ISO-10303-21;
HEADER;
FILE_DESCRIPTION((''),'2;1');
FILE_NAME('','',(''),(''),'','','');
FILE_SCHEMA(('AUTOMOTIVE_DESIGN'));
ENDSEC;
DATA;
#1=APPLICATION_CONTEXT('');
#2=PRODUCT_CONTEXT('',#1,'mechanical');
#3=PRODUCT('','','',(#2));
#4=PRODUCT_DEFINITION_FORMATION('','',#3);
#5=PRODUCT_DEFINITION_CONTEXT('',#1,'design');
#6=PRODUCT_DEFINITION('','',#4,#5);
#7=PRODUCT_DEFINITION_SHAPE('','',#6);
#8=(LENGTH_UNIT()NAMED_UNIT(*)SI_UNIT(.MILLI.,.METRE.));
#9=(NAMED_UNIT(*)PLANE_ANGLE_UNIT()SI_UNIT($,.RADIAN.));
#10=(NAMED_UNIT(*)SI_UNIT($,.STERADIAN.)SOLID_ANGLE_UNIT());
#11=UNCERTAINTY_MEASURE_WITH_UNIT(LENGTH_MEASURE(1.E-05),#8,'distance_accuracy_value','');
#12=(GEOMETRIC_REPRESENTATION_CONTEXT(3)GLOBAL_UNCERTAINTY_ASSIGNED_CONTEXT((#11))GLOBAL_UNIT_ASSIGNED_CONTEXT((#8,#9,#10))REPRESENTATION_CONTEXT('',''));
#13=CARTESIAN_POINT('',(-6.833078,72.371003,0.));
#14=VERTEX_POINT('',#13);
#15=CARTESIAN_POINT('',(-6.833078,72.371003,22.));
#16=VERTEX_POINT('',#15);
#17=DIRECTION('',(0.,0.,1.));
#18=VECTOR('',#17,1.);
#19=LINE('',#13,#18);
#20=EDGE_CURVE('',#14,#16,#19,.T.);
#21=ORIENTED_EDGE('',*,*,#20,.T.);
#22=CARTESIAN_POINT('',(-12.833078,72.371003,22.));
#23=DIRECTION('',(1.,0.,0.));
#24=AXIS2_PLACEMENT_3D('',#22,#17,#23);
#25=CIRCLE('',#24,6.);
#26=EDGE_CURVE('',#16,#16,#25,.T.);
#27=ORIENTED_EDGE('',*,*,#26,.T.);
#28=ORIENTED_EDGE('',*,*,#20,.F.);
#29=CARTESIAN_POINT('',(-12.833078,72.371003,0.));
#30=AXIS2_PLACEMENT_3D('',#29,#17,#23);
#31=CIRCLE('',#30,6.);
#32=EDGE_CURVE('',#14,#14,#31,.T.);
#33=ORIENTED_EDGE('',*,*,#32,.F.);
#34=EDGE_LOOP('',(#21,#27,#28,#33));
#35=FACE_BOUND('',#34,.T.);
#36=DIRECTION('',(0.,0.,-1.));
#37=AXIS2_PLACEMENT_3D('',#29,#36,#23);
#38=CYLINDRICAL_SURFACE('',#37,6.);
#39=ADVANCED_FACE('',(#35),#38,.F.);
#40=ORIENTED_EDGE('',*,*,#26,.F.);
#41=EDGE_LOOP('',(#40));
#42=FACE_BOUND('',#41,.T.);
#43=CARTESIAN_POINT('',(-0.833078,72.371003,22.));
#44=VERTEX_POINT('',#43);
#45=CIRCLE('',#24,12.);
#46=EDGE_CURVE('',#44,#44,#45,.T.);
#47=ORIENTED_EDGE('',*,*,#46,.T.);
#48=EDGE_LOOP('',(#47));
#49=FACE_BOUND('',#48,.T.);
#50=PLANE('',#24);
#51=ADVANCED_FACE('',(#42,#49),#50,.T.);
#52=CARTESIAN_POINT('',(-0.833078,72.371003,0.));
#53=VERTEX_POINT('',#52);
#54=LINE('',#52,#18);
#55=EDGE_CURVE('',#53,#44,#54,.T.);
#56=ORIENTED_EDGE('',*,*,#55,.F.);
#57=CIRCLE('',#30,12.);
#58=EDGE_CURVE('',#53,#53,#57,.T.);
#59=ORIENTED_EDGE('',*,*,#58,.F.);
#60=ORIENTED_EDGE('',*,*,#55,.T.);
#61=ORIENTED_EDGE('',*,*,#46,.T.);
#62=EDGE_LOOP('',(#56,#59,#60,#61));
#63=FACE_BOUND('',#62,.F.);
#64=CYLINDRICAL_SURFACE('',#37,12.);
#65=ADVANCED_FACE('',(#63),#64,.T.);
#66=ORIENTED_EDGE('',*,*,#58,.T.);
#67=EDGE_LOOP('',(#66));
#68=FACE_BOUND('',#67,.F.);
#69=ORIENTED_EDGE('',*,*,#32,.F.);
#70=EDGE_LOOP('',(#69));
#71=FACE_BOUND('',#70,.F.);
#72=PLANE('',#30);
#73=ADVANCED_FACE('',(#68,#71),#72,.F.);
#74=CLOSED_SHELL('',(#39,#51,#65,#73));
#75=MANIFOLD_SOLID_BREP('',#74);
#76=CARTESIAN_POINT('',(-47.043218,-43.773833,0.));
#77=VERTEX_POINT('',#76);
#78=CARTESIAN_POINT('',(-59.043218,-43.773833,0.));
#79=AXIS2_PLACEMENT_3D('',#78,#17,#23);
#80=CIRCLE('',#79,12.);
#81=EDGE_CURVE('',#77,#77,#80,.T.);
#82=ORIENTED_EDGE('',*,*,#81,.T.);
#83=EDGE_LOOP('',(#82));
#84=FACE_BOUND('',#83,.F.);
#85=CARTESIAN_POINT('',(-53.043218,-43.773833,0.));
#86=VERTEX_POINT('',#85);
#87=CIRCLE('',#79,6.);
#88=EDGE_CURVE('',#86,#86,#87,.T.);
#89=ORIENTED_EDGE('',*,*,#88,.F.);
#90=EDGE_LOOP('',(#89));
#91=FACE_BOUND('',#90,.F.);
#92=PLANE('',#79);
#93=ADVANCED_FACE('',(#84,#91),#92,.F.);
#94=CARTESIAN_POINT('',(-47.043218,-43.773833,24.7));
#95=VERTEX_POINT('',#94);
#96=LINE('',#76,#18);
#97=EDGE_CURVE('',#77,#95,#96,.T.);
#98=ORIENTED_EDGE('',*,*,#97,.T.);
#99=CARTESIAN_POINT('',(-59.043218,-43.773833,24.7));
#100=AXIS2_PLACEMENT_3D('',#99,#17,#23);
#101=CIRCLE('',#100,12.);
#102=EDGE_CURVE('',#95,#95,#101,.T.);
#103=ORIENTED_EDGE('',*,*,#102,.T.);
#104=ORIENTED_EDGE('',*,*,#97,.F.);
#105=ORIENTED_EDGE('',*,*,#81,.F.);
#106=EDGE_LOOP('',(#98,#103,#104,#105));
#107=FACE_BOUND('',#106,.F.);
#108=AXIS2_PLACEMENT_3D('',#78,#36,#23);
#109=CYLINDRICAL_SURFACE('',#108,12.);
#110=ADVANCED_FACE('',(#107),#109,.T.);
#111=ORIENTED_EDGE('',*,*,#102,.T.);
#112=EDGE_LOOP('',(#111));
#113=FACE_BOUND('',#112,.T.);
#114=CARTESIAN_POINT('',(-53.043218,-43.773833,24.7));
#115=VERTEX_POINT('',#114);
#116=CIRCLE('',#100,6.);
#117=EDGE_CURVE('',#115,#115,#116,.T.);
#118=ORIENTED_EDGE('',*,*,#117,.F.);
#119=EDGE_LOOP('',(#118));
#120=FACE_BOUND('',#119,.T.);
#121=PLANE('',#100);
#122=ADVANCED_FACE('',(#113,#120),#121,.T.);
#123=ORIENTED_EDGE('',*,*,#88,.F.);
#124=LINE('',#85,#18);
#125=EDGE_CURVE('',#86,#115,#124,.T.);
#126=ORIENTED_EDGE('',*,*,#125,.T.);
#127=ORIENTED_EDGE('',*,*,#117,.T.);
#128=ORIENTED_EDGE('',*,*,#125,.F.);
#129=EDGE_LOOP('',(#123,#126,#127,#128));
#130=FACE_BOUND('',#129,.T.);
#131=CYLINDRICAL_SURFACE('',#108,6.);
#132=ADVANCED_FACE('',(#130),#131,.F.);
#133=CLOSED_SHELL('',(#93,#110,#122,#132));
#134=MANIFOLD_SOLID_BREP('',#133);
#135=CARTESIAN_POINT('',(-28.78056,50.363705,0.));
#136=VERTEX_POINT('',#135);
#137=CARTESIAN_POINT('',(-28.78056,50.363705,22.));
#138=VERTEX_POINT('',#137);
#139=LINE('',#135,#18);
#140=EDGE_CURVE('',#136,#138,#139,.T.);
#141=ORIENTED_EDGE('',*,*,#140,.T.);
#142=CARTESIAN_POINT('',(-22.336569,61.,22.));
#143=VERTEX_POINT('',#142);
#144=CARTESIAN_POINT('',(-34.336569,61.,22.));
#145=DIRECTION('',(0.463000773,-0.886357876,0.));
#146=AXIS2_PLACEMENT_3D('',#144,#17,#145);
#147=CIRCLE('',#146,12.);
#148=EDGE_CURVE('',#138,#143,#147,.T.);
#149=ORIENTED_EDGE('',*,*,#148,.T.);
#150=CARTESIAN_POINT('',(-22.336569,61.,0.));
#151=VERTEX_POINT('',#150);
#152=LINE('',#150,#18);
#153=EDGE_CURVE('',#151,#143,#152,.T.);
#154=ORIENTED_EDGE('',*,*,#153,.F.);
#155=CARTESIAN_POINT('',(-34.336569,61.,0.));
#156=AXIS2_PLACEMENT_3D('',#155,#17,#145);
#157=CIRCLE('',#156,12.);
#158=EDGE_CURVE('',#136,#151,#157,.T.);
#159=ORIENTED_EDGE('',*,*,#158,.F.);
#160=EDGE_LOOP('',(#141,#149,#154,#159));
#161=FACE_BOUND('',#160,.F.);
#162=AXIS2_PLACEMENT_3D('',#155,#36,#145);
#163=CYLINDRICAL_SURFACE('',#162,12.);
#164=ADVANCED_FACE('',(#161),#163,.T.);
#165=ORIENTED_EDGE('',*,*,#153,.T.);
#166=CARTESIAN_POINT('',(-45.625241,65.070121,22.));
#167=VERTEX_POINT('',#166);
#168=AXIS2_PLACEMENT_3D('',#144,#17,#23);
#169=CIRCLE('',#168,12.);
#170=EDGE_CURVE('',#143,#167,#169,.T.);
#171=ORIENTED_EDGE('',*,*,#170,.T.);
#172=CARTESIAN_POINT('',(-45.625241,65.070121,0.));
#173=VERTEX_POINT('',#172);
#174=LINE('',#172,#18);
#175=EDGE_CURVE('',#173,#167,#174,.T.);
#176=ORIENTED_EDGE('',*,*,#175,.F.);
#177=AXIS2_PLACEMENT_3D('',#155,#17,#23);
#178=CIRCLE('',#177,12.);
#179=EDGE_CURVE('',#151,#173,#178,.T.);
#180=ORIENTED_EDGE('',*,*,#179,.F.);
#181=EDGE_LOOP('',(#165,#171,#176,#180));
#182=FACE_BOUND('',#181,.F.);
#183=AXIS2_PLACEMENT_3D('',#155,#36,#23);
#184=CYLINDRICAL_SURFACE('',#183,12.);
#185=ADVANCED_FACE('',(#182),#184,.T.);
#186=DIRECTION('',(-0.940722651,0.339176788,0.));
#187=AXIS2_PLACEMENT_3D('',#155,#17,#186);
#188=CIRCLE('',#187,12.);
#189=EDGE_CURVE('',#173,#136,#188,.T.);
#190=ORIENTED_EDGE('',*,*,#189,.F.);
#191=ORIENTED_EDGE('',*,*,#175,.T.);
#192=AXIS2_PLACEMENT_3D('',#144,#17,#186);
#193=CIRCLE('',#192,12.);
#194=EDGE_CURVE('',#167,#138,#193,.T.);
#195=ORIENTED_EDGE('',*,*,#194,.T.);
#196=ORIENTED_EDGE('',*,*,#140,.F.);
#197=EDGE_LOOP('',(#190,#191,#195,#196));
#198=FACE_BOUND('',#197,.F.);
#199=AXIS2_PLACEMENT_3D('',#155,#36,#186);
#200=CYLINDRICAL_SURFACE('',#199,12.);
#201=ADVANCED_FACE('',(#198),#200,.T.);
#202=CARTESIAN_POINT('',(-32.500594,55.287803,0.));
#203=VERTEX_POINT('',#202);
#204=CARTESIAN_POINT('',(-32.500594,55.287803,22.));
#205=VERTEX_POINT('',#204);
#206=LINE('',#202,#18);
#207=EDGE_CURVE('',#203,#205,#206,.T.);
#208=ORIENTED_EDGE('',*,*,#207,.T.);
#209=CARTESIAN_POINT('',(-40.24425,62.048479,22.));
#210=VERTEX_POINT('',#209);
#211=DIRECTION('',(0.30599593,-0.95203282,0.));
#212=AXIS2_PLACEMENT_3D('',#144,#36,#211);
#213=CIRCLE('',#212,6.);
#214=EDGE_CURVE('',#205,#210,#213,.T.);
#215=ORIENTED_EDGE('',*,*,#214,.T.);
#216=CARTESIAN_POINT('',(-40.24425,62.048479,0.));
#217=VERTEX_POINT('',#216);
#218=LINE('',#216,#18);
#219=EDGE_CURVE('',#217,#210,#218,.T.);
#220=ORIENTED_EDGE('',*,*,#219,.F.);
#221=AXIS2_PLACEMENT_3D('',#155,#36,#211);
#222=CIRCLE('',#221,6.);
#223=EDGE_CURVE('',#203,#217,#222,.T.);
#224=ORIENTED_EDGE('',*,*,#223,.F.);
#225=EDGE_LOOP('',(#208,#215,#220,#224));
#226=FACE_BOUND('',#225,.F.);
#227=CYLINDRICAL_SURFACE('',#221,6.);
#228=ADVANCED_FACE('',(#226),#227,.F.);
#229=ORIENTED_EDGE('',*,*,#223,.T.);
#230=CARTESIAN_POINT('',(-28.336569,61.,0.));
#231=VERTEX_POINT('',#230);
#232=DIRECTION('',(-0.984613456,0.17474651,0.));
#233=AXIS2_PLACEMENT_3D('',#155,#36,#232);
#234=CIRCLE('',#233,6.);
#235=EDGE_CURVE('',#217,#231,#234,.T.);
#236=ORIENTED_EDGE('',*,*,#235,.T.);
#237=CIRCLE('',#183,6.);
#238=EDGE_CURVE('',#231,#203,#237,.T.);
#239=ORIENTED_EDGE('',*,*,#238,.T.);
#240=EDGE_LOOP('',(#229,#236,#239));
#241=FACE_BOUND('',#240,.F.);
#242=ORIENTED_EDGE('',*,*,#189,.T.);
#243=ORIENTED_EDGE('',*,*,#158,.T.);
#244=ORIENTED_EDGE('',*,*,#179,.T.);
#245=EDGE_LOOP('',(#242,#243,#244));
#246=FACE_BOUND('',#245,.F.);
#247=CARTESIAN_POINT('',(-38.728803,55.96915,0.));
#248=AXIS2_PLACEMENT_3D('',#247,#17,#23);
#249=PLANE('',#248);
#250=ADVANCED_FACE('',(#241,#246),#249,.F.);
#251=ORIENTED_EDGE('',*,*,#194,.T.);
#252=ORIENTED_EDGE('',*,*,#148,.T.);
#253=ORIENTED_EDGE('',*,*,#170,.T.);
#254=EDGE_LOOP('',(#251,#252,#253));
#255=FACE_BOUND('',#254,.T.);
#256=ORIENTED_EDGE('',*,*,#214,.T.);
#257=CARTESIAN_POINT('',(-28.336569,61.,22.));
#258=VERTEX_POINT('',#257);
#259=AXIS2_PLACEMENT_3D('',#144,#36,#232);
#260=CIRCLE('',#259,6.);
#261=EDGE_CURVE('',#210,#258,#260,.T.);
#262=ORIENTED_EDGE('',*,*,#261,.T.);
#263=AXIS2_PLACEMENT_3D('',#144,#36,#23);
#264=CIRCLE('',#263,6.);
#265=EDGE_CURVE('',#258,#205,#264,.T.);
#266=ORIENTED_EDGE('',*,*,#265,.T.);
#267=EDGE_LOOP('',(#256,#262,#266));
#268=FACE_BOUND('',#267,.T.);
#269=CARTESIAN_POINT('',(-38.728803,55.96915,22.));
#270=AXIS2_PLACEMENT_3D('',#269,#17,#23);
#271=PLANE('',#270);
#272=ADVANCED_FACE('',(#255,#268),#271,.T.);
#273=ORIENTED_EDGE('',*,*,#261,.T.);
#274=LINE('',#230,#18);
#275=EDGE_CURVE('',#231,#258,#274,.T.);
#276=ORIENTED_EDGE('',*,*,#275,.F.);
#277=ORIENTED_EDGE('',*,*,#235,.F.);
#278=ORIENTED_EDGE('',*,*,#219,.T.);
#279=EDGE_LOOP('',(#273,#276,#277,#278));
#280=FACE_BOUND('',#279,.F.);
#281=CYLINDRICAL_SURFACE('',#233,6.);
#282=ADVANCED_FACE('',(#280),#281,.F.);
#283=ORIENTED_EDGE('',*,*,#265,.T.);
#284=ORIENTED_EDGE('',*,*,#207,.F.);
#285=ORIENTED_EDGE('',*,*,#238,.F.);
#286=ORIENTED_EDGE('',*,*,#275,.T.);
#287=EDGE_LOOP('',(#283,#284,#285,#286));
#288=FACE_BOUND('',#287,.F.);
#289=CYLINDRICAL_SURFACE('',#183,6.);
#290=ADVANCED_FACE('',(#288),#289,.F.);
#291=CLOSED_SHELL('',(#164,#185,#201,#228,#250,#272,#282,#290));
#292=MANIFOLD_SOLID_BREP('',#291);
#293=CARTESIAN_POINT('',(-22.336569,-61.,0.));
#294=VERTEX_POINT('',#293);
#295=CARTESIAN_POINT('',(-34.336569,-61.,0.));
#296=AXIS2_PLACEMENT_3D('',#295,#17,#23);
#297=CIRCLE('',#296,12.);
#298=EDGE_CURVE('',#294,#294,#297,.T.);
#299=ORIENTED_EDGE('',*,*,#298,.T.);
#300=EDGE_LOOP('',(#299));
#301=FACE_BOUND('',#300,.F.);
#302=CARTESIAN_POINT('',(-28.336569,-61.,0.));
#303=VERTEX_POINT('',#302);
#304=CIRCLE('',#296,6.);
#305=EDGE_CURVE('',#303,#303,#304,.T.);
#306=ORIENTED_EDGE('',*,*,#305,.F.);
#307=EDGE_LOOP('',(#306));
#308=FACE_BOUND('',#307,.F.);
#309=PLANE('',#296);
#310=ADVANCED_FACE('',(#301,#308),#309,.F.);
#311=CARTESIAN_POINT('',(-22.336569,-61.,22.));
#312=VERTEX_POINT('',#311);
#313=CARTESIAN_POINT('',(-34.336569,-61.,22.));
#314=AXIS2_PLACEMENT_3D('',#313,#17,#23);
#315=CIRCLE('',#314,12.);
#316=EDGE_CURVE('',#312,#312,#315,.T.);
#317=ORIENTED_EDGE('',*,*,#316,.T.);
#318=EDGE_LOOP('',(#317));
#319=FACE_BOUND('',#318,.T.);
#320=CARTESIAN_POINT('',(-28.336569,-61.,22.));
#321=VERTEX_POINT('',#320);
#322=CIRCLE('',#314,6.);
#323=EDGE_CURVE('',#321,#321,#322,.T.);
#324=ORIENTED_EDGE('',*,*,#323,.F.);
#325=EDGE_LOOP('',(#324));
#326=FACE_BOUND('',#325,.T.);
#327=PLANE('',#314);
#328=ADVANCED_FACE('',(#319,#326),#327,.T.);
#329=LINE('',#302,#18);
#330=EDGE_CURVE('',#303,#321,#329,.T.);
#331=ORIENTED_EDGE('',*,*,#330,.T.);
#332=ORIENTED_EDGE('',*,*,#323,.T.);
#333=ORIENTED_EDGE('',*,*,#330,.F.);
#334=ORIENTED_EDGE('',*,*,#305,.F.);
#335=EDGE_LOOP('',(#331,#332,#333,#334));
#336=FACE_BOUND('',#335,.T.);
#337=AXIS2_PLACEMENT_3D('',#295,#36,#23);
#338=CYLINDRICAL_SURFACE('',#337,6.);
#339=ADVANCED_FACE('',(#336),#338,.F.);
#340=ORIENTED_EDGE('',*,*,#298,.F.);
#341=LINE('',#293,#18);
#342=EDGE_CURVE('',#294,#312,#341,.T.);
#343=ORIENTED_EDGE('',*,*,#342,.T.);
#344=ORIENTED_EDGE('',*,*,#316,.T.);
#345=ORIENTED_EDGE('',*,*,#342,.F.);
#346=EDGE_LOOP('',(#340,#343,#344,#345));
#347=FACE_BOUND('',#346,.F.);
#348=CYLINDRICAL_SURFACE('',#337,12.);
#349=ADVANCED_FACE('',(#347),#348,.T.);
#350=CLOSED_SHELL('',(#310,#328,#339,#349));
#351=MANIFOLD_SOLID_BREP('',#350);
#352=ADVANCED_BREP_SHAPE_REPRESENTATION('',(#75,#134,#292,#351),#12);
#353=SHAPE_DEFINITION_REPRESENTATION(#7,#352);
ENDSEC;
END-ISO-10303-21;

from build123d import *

# Parameters (mm, degrees)
F1_DEPTH = 22
F0_R     = 12
F0_R_2   = 6
F2_DEPTH = 24.7


# Not quite as in the source:
# - a feature names something its author has since deleted; it is built from what else it names


with BuildPart() as f1:
    # F0 (on Top) → F1 (new body)
    with BuildSketch(Plane.XY):
        with BuildLine():
            ThreePointArc((-32.5005938447, 55.2878030792), (-38.2826283024, 56.4801969788), (-40.2442501608, 62.0484790627))
            ThreePointArc((-40.2442501608, 62.0484790627), (-42.8763850896, 63.6632298081), (-45.6252412401, 65.070121459))
            ThreePointArc((-45.6252412401, 65.070121459), (-42.2286871779, 51.9603939576), (-28.7805601487, 50.3637054901))
            ThreePointArc((-28.7805601487, 50.3637054901), (-30.5454719824, 52.897603766), (-32.5005938447, 55.2878030792))
        make_face()
        with BuildLine():
            ThreePointArc((-40.2442501608, 62.0484790627), (-33.8103016262, 66.9768756221), (-28.3365694268, 61))
            ThreePointArc((-28.3365694268, 61), (-29.4880720569, 57.465587283), (-32.5005938447, 55.2878030792))
            ThreePointArc((-32.5005938447, 55.2878030792), (-30.5454719824, 52.897603766), (-28.7805601487, 50.3637054901))
            ThreePointArc((-28.7805601487, 50.3637054901), (-24.0732339227, 54.7819662005), (-22.3365694268, 61))
            ThreePointArc((-22.3365694268, 61), (-32.2706630591, 72.8208303803), (-45.6252412401, 65.070121459))
            ThreePointArc((-45.6252412401, 65.070121459), (-42.8763850896, 63.6632298081), (-40.2442501608, 62.0484790627))
        make_face()
    extrude(amount=F1_DEPTH)


with BuildPart() as f1b:
    # F0 (on Top) → F1, piece 2 (new body)
    with BuildSketch(Plane.XY):
        with Locations((-34.3365694268, -61)):
            Circle(F0_R)
        with Locations((-34.3365694268, -61)):
            Circle(F0_R_2, mode=Mode.SUBTRACT)
    extrude(amount=F1_DEPTH)


with BuildPart() as f1c:
    # F0 (on Top) → F1, piece 3 (new body)
    with BuildSketch(Plane.XY):
        with Locations((-12.8330777054, 72.3710032859)):
            Circle(F0_R)
        with Locations((-12.8330777054, 72.3710032859)):
            Circle(F0_R_2, mode=Mode.SUBTRACT)
    extrude(amount=F1_DEPTH)


with BuildPart() as f2:
    # F0 (on Top) → F2 (new body)
    with BuildSketch(Plane.XY):
        with Locations((-59.0432177121, -43.7738328479)):
            Circle(F0_R)
        with Locations((-59.0432177121, -43.7738328479)):
            Circle(F0_R_2, mode=Mode.SUBTRACT)
    extrude(amount=F2_DEPTH)


solid = Compound([f1.part, f1b.part, f1c.part, f2.part])
